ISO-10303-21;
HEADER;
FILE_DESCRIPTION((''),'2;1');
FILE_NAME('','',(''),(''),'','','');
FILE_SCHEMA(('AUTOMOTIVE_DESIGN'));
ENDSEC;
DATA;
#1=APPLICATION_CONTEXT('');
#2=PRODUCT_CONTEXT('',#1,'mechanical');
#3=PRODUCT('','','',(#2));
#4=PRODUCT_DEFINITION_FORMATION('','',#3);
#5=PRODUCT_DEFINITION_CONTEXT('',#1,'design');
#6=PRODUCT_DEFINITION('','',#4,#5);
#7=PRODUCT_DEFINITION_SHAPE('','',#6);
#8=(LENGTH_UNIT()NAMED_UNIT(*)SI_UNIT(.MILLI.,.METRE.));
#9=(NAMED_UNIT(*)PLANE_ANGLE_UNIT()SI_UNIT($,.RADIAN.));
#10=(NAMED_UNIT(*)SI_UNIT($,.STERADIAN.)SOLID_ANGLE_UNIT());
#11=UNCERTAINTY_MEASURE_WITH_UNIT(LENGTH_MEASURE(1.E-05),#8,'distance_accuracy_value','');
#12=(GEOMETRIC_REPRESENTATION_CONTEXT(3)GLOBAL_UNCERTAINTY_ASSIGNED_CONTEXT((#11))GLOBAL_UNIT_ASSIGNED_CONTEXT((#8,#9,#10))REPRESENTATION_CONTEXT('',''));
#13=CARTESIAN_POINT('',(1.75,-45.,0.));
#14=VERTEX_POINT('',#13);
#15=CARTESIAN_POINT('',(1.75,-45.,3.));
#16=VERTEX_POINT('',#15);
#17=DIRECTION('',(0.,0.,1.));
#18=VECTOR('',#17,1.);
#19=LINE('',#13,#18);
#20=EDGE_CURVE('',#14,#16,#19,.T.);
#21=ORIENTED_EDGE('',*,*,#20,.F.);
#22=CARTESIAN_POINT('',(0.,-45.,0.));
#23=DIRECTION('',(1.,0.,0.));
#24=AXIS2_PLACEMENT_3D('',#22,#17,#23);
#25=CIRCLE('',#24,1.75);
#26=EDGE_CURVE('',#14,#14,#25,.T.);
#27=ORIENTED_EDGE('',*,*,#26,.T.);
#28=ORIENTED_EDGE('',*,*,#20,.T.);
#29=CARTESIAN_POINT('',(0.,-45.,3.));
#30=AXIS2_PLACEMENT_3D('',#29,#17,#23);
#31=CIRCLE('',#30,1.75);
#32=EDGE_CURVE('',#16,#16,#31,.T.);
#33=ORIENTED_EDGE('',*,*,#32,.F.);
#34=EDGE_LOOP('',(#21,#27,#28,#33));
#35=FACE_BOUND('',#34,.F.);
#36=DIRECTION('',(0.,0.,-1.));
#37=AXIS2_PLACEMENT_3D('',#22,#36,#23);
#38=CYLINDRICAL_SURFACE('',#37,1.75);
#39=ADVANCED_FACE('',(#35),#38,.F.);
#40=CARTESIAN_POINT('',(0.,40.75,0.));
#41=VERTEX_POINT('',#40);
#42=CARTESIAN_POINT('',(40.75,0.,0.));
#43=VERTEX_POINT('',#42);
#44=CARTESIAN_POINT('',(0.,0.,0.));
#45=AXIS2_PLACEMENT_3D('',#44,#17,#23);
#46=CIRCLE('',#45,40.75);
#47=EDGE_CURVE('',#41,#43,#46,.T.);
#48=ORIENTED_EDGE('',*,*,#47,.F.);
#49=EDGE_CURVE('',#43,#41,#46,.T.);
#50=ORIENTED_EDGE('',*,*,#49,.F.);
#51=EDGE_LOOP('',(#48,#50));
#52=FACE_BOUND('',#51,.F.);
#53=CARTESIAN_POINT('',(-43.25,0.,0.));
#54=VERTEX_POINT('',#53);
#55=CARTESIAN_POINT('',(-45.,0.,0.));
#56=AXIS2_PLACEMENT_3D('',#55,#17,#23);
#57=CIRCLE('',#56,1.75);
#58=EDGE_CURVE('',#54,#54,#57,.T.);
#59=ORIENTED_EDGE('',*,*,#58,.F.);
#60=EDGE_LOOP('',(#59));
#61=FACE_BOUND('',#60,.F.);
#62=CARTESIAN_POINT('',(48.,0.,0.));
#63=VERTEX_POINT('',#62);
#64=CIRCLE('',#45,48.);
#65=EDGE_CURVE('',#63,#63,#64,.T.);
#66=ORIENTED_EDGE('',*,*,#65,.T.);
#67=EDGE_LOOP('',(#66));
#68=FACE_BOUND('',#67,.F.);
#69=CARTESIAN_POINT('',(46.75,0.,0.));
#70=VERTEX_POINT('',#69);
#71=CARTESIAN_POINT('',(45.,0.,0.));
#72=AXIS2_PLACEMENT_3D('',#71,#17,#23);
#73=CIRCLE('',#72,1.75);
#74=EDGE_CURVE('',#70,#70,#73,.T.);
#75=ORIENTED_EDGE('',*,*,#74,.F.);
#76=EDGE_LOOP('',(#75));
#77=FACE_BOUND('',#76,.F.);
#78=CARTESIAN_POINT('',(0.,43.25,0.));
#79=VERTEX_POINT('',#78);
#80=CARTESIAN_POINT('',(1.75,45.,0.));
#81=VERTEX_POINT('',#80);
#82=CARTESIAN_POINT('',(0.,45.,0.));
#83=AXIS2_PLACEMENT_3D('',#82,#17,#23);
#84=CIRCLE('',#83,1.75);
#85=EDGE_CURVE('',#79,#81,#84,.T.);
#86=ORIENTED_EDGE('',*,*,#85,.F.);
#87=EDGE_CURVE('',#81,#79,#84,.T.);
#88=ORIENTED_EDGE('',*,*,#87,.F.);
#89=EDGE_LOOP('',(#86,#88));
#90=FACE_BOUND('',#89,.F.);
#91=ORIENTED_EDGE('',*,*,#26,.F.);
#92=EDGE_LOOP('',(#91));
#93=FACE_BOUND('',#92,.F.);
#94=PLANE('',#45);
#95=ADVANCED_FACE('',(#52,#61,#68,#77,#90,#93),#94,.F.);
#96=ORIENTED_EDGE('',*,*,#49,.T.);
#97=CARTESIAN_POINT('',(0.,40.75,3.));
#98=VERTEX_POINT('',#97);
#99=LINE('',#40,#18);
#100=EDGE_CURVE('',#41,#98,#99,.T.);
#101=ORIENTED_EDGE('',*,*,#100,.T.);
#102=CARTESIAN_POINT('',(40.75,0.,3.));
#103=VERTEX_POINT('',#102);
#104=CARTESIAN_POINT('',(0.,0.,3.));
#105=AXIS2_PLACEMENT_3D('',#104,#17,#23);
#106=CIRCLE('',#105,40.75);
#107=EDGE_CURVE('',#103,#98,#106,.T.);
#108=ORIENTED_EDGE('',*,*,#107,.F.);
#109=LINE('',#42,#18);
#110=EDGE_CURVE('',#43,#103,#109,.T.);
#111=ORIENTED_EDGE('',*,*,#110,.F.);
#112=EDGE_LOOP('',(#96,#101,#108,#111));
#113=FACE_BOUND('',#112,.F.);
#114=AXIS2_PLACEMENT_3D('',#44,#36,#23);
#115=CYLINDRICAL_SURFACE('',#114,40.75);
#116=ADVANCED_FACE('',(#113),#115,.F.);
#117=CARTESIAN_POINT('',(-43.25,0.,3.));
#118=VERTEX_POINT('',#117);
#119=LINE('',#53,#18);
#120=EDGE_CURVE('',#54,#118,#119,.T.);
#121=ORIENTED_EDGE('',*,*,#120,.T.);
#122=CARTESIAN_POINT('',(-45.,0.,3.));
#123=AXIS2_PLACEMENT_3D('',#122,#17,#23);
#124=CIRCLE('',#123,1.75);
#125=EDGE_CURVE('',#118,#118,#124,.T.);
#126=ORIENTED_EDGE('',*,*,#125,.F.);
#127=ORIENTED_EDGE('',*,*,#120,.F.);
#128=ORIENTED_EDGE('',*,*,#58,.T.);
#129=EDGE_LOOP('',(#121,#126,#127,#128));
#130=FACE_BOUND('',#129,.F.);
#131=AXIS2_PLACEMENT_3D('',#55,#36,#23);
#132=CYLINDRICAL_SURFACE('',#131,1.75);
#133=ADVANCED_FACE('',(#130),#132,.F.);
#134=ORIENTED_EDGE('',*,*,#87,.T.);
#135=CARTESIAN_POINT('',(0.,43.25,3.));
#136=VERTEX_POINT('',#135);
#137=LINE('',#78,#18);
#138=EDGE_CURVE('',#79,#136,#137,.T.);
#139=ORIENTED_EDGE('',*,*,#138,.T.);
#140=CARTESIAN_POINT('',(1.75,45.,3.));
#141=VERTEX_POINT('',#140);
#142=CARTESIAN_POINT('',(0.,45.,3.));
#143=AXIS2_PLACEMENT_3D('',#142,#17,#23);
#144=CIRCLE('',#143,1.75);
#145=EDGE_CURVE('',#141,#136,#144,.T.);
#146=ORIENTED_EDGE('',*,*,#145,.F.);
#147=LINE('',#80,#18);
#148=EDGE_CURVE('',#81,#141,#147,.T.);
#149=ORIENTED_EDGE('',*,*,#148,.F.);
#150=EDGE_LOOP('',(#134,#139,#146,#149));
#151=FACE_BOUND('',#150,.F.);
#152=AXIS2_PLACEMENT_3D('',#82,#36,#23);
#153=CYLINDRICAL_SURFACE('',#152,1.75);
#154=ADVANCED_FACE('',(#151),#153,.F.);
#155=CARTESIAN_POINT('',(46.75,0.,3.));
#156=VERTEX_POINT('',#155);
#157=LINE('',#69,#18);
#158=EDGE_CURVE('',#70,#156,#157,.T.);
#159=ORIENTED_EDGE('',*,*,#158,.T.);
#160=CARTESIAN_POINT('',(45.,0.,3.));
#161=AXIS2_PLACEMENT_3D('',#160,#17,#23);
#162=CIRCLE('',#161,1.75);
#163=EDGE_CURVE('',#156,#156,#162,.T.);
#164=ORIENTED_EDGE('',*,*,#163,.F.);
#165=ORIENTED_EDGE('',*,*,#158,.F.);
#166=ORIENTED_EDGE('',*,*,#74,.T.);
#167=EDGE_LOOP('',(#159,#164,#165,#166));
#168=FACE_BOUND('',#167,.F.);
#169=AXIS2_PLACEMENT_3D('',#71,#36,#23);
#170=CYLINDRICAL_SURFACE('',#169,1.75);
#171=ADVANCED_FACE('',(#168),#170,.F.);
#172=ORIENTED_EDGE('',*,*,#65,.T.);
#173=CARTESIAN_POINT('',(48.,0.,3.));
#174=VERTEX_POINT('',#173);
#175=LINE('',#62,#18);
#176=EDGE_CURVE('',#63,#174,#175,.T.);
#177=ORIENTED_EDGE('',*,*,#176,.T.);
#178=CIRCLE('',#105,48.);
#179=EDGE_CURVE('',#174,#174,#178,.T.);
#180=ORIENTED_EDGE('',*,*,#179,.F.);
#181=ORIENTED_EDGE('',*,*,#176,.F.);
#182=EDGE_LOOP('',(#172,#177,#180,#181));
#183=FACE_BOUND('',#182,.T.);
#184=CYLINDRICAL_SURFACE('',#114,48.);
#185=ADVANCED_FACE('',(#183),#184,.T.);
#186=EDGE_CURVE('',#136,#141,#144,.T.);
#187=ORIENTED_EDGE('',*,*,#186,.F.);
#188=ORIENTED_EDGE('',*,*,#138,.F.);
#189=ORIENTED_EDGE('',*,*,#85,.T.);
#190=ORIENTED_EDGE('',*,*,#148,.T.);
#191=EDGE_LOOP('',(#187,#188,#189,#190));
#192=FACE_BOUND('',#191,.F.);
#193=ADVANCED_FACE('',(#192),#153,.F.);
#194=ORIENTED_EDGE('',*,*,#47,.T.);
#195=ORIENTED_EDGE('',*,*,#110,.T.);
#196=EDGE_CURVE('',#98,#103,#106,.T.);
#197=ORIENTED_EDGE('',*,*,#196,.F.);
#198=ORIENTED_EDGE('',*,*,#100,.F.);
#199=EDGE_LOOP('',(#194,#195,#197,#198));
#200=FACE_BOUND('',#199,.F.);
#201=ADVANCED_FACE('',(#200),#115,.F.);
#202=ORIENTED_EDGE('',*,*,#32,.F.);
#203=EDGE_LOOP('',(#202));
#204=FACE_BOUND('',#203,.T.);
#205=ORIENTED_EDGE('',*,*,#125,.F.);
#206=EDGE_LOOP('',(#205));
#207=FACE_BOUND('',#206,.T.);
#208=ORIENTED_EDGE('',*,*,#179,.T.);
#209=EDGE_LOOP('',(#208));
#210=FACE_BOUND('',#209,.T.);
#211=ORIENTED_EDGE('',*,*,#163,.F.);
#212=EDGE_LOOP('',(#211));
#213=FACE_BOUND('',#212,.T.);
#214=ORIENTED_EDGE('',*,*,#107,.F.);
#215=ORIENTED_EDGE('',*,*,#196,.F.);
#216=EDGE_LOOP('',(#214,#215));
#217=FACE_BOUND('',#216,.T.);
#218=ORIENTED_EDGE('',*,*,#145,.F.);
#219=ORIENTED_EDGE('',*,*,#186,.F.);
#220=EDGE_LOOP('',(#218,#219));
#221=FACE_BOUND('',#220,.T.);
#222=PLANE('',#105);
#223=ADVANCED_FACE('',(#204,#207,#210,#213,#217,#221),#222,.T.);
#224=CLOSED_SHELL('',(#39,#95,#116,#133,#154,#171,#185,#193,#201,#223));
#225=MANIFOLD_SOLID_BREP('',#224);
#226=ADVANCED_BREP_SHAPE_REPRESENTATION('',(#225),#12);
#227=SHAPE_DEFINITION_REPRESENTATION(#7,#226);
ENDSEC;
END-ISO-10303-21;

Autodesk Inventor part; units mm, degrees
ref_plane "YZ Plane" through (0, 0, 0) normal (1, 0, 0) x (0, 1, 0)
ref_plane "XZ Plane" through (0, 0, 0) normal (0, 1, 0) x (-1, 0, 0)
ref_plane "XY Plane" through (0, 0, 0) normal (0, 0, 1) x (1, 0, 0)
sketch "Sketch1" plane through (0, 0, 0) normal (0, 0, 1) x (1, 0, 0)
  circle A0 centre (0, 0) radius 48
  circle A1 centre (0, 0) radius 40.75
  line L0 (0, 0) -> (0, 45)
  circle A2 centre (0, 45) radius 1.75
  circle A3 centre (-45, 0) radius 1.75
  circle A4 centre (0, -45) radius 1.75
  circle A5 centre (45, 0) radius 1.75
  dimension "d0" = 96
  dimension "d1" = 81.5
  dimension "d2" = 45
  dimension "d3" = 3.5
  dimension "d6" = 360
extrude "Extrusion1" add sketch "Sketch1" along normal blind 3
properties part number "arm_0_bottom_top_lock"
